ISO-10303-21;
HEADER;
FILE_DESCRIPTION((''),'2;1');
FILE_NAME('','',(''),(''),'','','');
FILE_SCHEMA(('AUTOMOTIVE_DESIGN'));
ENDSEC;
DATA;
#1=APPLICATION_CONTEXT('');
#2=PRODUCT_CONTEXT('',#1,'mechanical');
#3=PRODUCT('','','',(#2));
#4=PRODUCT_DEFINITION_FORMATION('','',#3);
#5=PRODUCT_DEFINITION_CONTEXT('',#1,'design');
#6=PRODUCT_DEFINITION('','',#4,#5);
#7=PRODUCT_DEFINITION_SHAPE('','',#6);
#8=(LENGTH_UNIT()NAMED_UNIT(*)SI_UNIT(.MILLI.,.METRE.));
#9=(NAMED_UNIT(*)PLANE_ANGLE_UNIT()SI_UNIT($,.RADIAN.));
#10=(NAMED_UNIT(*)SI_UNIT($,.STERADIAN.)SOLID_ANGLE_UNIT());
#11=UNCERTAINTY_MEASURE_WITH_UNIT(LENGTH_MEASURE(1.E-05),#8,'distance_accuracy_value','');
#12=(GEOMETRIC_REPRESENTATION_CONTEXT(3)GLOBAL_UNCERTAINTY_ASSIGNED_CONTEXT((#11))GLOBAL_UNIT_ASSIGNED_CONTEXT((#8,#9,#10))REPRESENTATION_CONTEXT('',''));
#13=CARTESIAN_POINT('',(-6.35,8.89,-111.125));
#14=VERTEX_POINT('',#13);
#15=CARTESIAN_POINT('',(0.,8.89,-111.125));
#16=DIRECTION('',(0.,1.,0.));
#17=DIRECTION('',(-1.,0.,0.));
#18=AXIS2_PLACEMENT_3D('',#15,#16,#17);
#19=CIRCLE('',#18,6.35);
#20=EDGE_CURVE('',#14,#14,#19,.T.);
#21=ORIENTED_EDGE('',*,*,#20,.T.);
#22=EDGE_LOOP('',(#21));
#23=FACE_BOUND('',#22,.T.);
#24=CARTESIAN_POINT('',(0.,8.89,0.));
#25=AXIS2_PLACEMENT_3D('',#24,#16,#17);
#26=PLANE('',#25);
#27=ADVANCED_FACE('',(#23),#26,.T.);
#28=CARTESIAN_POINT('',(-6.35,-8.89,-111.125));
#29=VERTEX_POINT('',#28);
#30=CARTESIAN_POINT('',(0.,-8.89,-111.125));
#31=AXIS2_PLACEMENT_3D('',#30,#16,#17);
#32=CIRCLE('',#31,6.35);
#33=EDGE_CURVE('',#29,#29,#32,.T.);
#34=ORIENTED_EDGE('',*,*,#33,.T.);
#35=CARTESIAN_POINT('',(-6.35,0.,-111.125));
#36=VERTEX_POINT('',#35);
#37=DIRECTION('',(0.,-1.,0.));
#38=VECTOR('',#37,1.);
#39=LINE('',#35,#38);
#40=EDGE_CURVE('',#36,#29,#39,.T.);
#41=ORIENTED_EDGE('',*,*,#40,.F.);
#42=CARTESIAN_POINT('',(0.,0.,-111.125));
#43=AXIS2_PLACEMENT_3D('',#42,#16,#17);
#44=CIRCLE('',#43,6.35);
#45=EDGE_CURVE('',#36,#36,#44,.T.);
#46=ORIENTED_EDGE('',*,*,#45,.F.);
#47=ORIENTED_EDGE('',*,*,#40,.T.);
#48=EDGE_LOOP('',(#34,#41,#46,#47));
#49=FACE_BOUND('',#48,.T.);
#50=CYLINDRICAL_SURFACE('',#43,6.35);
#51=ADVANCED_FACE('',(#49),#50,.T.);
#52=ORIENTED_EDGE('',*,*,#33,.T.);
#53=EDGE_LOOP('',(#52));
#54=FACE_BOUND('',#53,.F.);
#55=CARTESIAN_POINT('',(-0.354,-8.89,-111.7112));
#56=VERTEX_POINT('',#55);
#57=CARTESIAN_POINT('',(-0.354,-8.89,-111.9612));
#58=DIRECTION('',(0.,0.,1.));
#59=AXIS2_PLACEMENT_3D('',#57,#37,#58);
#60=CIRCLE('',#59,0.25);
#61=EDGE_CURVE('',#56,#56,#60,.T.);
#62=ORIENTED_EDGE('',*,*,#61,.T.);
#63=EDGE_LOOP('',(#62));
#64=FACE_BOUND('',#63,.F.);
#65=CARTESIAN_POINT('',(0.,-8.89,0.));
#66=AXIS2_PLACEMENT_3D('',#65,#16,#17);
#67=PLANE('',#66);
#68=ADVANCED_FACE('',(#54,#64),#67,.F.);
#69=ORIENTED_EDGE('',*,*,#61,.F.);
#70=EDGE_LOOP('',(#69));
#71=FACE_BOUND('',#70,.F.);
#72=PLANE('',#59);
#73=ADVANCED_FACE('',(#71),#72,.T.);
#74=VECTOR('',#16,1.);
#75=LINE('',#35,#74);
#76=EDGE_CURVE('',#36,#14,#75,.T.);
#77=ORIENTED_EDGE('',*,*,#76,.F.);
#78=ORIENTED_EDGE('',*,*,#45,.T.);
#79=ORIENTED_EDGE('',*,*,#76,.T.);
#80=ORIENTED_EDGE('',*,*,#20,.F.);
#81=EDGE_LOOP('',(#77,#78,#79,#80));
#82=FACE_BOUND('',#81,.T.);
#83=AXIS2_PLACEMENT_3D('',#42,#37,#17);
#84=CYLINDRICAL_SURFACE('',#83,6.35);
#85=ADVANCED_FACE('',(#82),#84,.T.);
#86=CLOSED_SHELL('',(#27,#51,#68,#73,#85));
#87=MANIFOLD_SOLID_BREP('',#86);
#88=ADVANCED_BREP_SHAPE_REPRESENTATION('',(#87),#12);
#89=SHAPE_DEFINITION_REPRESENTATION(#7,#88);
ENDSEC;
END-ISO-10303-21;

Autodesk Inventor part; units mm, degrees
ref_plane "YZ Plane" through (0, 0, 0) normal (1, 0, 0) x (0, 1, 0)
ref_plane "XZ Plane" through (0, 0, 0) normal (0, 1, 0) x (-1, 0, 0)
ref_plane "XY Plane" through (0, 0, 0) normal (0, 0, 1) x (1, 0, 0)
surface "Composite1"
sketch "Sketch1" plane through (0, 0, 0) normal (0, 1, 0) x (-1, 0, 0)
  circle A0 centre (0, -111.125) radius 6.35
  point P0 (0, 0)
extrude "Extrusion1" add sketch "Sketch1" along normal blind 8.89 and the other way blind 8.89
sketch "Sketch2" plane through (0, -8.89, -111.125) normal (0, -1, 0) x (1, 0, 0)
  point P0 (0, 111.125)
  point P1 (-0.354, -0.8362)
hole "Hole1" at (-0.354, -8.89, -111.9612) direction (0, -1, 0) diameter 0.5 depth 0.5
properties part number "stickROCK"
